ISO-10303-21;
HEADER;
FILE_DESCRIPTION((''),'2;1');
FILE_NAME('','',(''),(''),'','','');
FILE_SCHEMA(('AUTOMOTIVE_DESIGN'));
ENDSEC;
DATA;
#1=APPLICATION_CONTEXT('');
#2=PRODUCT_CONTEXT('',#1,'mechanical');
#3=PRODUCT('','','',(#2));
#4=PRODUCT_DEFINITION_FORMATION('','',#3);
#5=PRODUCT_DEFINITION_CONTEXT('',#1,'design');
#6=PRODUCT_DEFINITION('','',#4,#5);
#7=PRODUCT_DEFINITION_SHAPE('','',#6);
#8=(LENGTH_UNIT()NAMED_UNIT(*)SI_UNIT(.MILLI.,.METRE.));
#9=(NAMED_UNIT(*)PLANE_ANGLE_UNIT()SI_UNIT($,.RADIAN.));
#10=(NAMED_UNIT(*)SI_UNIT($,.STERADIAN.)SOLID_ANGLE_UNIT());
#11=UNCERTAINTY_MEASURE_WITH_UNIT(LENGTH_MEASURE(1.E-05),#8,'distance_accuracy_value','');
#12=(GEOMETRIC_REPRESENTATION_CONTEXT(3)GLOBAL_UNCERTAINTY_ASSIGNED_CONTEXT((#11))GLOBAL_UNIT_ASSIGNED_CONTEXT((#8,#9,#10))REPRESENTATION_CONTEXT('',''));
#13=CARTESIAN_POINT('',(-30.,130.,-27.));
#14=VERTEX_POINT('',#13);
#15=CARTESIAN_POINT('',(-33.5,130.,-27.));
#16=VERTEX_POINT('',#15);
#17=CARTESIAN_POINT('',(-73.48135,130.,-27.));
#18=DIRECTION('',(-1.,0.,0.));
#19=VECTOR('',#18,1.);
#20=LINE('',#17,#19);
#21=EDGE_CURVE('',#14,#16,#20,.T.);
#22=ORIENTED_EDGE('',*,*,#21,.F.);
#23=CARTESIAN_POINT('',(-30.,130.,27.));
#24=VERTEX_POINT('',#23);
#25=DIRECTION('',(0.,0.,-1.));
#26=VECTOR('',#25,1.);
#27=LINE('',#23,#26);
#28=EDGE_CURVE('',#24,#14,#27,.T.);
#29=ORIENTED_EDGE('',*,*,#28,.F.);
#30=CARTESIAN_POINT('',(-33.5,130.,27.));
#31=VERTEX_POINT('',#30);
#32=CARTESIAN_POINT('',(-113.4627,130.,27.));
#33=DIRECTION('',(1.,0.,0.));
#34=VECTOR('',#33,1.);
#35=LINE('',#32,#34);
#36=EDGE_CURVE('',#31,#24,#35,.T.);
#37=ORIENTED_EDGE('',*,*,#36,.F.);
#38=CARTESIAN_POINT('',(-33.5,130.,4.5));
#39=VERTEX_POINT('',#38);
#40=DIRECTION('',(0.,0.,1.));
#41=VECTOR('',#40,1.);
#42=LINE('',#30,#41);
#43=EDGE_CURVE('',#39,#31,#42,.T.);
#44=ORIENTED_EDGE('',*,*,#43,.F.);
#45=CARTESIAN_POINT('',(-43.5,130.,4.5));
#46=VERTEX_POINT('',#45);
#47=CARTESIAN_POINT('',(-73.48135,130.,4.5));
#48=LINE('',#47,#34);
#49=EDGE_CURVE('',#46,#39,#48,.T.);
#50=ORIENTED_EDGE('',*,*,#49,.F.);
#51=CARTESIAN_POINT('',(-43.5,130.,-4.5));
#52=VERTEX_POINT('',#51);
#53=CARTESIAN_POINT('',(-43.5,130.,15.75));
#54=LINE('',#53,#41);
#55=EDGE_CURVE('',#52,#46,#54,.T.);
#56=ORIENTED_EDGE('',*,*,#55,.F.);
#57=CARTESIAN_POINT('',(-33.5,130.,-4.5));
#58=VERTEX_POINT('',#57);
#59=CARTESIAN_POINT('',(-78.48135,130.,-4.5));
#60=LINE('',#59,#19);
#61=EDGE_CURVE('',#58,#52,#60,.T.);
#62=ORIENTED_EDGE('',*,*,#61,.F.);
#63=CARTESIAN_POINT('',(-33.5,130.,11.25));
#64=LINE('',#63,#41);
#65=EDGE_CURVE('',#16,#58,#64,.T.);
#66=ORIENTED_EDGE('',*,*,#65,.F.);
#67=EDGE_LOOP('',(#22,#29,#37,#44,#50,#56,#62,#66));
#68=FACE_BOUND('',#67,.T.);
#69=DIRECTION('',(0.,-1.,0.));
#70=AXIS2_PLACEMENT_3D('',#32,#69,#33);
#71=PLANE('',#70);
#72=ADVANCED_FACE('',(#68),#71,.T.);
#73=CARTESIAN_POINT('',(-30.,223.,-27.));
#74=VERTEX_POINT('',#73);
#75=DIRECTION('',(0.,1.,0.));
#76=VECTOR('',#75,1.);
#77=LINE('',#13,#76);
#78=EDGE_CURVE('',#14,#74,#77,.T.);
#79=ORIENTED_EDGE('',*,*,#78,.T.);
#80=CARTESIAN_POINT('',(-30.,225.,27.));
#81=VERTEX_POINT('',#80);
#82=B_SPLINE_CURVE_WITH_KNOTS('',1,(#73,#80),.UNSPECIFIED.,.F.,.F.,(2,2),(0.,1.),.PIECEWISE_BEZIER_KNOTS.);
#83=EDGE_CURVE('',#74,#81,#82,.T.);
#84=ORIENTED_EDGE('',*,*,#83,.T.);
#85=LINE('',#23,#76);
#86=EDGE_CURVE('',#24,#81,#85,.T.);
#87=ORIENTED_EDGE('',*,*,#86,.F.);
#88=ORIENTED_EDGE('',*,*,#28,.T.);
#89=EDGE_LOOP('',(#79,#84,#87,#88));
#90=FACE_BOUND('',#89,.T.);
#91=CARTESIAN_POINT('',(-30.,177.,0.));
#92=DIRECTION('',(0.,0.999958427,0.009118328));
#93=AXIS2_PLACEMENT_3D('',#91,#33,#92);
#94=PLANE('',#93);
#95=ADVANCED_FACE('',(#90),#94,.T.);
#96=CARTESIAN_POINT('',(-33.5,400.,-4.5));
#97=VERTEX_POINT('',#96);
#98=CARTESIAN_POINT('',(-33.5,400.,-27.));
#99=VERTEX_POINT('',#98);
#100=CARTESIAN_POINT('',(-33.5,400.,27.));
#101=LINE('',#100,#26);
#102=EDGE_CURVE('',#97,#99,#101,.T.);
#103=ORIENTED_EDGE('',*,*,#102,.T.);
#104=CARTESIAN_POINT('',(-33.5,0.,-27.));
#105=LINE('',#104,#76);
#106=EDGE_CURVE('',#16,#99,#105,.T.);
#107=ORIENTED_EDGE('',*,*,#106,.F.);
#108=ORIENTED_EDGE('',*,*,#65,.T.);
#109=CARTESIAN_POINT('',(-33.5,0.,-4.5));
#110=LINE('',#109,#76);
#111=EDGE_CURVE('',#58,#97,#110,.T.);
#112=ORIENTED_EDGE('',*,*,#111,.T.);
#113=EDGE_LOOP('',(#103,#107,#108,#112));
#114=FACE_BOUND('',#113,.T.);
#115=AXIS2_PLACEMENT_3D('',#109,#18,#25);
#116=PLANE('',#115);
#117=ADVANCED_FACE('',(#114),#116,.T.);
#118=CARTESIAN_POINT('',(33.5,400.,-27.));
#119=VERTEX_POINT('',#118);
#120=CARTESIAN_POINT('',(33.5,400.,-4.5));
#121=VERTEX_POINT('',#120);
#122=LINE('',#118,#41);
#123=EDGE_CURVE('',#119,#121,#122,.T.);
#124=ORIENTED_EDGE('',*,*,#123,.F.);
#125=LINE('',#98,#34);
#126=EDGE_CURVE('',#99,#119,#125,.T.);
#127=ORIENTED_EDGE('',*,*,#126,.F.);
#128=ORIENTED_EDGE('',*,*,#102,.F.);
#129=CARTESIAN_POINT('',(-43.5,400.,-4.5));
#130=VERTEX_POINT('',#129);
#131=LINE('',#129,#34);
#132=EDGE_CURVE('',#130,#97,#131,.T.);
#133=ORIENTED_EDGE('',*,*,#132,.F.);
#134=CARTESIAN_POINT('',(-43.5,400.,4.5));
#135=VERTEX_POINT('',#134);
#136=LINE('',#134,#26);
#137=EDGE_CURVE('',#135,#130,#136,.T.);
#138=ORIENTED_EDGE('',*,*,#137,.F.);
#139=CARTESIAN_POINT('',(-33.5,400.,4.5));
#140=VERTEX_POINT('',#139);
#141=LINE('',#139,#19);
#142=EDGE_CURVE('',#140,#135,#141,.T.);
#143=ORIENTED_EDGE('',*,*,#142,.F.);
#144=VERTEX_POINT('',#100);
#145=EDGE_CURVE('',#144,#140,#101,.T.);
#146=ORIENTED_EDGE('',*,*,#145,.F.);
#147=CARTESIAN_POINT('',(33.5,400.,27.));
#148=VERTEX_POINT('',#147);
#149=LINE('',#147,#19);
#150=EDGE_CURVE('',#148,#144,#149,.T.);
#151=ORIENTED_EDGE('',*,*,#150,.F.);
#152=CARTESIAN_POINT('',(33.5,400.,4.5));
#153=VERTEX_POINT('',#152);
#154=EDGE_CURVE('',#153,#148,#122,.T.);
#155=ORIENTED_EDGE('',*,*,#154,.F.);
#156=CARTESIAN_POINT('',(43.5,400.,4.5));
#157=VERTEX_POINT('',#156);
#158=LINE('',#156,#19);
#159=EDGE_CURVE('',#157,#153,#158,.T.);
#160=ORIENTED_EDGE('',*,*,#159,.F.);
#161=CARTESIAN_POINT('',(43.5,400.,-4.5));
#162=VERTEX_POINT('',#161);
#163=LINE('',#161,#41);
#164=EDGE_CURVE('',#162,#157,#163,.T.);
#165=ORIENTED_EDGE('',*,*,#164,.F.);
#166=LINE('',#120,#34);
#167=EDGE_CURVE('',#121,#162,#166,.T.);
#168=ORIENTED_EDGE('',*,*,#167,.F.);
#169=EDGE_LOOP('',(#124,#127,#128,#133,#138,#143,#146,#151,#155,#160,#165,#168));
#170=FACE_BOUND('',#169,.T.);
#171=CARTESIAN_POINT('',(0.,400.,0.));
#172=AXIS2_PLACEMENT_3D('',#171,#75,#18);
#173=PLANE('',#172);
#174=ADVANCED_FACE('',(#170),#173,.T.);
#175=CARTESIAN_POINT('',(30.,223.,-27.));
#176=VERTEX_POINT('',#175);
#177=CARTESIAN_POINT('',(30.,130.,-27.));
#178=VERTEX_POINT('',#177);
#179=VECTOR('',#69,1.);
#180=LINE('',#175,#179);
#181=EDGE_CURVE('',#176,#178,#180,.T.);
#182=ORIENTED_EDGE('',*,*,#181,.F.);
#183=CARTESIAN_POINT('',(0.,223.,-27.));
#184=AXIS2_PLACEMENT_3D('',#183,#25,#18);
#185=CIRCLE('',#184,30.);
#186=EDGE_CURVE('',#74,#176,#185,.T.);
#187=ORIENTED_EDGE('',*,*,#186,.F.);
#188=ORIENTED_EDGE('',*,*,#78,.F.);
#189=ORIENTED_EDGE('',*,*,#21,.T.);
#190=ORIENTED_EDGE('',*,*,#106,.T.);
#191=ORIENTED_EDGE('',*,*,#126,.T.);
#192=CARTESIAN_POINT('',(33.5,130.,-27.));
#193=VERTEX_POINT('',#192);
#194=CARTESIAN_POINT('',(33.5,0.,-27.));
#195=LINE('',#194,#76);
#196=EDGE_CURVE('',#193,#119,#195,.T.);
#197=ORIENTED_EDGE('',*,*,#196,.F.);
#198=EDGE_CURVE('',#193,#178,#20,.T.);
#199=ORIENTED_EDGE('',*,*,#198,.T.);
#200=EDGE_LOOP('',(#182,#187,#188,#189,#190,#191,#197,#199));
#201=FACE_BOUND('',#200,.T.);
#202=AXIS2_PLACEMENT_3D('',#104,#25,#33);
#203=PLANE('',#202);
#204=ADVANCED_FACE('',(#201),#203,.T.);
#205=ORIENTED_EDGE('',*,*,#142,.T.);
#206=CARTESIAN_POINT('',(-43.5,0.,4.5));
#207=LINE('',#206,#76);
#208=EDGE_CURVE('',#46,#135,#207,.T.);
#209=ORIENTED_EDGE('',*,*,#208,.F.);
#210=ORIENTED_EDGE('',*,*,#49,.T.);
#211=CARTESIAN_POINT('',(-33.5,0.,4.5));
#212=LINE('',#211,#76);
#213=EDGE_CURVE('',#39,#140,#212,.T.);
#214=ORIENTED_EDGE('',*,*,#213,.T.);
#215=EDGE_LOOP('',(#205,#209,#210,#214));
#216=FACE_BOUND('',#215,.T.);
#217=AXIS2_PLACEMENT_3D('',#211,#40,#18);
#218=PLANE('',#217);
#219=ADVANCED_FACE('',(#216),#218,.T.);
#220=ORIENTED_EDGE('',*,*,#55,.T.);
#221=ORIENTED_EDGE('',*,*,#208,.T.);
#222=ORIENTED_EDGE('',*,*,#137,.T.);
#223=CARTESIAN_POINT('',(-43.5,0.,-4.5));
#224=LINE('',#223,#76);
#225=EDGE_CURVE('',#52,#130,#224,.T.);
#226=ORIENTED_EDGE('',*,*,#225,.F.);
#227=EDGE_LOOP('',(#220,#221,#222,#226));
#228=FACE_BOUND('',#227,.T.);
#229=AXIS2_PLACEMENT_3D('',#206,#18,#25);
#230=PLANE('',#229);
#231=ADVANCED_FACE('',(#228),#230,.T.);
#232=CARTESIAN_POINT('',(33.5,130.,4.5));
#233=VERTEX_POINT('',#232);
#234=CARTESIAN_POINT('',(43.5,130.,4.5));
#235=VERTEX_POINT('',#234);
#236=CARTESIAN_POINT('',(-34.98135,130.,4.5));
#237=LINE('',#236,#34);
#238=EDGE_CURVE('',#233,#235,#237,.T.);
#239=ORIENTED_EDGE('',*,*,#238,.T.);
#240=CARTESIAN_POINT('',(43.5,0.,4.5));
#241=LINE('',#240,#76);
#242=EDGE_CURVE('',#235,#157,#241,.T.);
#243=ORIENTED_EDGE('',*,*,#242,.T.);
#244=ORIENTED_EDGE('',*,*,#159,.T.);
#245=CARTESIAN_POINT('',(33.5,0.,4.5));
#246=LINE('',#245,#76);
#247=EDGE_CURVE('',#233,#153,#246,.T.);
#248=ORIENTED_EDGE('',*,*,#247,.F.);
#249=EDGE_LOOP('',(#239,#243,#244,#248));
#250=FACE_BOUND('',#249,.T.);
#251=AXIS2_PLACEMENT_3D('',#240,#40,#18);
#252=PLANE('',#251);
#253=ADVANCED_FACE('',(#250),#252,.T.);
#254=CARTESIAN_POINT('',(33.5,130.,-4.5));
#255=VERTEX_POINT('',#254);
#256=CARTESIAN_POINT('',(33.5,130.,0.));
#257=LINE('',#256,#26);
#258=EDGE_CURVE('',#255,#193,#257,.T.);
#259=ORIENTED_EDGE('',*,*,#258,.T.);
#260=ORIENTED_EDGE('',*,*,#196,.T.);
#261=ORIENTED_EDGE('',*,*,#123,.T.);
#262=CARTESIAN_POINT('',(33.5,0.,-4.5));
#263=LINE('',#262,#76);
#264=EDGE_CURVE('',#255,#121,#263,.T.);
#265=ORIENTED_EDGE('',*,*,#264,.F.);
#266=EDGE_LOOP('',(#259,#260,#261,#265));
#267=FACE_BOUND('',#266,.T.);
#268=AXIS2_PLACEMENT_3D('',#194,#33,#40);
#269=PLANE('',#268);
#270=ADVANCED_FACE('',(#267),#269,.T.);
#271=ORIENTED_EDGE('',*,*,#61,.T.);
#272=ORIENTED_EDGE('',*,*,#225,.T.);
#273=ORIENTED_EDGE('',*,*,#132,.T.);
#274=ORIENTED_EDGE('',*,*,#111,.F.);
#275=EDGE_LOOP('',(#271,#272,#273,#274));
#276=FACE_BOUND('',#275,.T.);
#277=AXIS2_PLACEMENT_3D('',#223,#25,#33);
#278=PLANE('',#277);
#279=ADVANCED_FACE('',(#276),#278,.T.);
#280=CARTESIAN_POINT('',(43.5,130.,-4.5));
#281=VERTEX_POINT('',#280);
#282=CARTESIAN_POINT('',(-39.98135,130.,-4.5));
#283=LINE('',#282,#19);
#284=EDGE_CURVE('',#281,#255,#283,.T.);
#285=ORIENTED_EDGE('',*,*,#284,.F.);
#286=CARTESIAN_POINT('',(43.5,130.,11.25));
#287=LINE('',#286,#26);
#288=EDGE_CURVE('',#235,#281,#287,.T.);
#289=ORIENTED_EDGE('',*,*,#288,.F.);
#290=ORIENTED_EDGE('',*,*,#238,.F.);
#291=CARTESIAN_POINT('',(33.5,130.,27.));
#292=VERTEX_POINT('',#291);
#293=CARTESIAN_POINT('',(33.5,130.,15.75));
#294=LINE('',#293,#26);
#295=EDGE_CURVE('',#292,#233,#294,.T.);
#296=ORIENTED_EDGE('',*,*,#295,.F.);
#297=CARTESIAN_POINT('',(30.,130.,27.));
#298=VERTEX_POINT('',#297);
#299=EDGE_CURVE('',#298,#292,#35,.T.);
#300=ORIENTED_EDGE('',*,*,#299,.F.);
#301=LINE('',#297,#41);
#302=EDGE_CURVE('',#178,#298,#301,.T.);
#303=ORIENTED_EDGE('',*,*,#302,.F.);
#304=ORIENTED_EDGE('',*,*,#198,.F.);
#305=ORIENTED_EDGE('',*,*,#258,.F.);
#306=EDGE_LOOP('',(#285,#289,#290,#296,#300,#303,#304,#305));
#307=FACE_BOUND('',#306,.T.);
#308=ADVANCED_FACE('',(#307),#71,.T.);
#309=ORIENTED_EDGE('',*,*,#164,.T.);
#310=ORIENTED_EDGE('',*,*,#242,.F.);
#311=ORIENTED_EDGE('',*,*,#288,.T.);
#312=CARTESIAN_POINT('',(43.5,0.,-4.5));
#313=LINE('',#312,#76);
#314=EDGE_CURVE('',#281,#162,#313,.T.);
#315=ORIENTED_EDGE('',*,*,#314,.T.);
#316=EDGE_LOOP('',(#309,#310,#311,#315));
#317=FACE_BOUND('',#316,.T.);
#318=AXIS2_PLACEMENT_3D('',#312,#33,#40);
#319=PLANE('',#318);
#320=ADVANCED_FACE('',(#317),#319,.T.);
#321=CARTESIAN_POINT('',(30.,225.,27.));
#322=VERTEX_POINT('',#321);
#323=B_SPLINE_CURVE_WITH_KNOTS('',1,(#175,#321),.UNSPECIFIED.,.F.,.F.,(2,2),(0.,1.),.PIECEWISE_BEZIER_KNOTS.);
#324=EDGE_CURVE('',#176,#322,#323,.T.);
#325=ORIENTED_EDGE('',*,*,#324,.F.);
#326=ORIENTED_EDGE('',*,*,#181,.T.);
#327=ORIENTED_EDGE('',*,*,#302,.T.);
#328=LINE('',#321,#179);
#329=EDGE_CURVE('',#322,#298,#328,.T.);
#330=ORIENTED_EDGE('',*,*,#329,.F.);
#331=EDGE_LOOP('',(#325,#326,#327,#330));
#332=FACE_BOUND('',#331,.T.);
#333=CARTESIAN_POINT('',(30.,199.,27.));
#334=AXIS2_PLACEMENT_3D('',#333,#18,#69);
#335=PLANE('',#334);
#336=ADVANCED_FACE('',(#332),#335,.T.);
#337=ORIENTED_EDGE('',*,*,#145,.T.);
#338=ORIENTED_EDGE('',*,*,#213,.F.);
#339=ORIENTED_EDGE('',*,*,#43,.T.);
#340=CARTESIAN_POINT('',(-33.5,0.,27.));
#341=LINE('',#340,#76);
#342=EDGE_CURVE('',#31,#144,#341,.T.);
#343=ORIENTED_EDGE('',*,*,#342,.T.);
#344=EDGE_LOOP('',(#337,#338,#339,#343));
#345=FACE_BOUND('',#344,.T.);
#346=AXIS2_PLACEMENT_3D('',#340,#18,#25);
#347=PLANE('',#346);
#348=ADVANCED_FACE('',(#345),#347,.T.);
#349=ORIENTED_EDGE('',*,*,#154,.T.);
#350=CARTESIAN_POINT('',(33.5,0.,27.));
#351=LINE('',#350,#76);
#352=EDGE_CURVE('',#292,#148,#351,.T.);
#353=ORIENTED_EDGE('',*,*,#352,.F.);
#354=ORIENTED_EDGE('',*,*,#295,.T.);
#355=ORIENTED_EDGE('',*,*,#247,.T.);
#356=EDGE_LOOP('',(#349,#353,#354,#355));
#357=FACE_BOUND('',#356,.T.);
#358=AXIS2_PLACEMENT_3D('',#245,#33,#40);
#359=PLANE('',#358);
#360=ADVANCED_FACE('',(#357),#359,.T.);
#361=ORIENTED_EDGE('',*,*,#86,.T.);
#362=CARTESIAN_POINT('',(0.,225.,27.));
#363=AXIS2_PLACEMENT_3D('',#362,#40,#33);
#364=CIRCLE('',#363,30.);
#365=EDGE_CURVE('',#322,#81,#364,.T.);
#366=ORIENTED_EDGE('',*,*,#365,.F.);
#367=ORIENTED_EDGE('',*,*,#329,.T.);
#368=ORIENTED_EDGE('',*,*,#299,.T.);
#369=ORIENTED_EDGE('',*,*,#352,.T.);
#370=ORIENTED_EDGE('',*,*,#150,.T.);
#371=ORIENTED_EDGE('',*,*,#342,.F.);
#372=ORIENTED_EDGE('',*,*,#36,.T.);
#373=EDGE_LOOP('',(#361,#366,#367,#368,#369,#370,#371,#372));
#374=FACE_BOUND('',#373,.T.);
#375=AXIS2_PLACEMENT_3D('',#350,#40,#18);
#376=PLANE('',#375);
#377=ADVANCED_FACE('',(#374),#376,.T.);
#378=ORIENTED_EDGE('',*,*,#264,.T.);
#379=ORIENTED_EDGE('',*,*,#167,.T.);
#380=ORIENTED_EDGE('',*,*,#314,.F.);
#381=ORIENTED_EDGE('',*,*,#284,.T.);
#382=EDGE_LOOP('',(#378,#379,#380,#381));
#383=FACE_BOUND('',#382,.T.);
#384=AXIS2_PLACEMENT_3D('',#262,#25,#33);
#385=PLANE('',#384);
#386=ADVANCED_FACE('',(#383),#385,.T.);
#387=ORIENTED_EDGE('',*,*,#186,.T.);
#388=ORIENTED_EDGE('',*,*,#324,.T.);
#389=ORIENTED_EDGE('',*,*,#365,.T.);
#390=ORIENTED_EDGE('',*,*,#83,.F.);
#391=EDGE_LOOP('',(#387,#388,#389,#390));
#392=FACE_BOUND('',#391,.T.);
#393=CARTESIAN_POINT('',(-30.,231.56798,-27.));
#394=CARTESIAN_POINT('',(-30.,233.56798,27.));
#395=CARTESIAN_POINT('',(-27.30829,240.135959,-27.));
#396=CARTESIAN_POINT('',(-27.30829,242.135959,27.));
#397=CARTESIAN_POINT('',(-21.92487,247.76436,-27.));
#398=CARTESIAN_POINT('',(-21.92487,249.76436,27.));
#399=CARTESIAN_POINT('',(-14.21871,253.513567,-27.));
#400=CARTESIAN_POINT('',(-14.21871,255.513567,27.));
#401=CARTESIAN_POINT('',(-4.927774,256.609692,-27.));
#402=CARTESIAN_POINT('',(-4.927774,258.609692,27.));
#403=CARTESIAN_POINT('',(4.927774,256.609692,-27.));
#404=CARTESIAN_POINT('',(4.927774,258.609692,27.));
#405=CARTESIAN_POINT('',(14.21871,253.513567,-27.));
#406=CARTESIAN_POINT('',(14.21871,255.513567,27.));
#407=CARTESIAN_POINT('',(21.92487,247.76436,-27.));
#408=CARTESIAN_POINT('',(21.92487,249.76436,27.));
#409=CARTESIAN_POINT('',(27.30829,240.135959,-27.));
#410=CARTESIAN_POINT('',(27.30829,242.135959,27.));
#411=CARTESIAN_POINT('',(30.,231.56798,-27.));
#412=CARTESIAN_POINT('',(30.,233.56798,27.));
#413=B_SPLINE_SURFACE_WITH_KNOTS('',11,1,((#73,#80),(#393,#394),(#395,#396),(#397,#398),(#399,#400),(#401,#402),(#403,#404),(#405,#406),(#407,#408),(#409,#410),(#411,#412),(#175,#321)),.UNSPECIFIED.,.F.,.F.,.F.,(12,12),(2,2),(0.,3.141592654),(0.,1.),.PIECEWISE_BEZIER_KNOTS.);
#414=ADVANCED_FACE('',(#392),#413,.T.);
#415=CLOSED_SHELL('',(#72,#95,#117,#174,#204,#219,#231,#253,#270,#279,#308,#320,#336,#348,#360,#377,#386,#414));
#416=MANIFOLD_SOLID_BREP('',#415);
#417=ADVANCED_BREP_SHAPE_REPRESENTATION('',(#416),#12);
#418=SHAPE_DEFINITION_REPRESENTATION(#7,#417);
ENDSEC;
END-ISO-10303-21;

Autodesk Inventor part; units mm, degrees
ref_plane "YZ Plane" through (0, 0, 0) normal (1, 0, 0) x (0, 1, 0)
ref_plane "XZ Plane" through (0, 0, 0) normal (0, 1, 0) x (-1, 0, 0)
ref_plane "XY Plane" through (0, 0, 0) normal (0, 0, 1) x (1, 0, 0)
sketch "草圖1" plane through (0, 0, 0) normal (0, 1, 0) x (-1, 0, 0)
  line L0 (-33.5, 27) -> (33.5, 27)
  line L1 (33.5, 27) -> (33.5, -27)
  line L2 (33.5, -27) -> (-33.5, -27)
  line L3 (-33.5, -27) -> (-33.5, 27)
  line L4 (-33.5, 27) -> (33.5, -27) construction
  line L5 (33.5, 27) -> (-33.5, -27) construction
  line L6 (43.5, -4.5) -> (33.5, -4.5)
  line L7 (33.5, -4.5) -> (33.5, 4.5)
  line L8 (33.5, 4.5) -> (43.5, 4.5)
  line L9 (43.5, 4.5) -> (43.5, -4.5)
  line L10 (-33.5, -4.5) -> (-43.5, -4.5)
  line L11 (-43.5, -4.5) -> (-43.5, 4.5)
  line L12 (-43.5, 4.5) -> (-33.5, 4.5)
  line L13 (-33.5, 4.5) -> (-33.5, -4.5)
  point P0 (0, 0)
  point P1 (33.5, 0)
  point P2 (-33.5, 0)
  point P3 (-33.5, 4.5)
  point P4 (-33.5, -4.5)
  dimension "d0" = 67
  dimension "d1" = 54
  dimension "d2" = 9
  dimension "d3" = 10
extrude "擠出1" add sketch "草圖1" along normal blind 400
sketch "草圖2" plane through (-33.5, 0, 27) normal (0, 0, 1) x (1, 0, 0)
  line L0 (0, 0) -> (0, 400) projected
  line L1 (0, 400) -> (67, 400) projected
  line L2 (67, 400) -> (67, 0) projected
  line L3 (67, 0) -> (0, 0) projected
  circle A0 centre (33.5, 199) radius 30
  line L4 (3.5, 199) -> (63.5, 199)
  line L5 (63.5, 199) -> (63.5, -2.327)
  line L6 (63.5, -2.327) -> (3.5, -2.327)
  line L7 (3.5, -2.327) -> (3.5, 199)
  point P0 (33.5, 0)
  point P1 (33.5, 0)
  point P2 (3.5, 199)
  point P3 (3.5, 0)
  point P4 (63.5, 0)
  dimension "d6" = 199
  dimension "d7" = 60
extrude "擠出2" cut sketch "草圖2" against normal through all contours L7 A0 L5 L3 | L4 A0 | A0 L4
sketch "草圖3" plane through (-33.5, 400, 27) normal (0, 0, 1) x (1, 0, 0)
  line L0 (-79.9627, -270) -> (146.9627, -270)
  line L1 (146.9627, -270) -> (146.9627, -400)
  line L2 (146.9627, -400) -> (-79.9627, -400)
  line L3 (-79.9627, -400) -> (-79.9627, -270)
  point P0 (33.5, -400)
  point P1 (33.5, -400)
  dimension "d10" = 130
extrude "擠出3" cut sketch "草圖3" against normal through all
sketch "草圖4" plane through (33.5, 400, -27) normal (0, 0, -1) x (-1, 0, 0)
  arc A0 (63.5, -201) -> (3.5, -201) centre (33.5, -201) ccw construction
  circle A1 centre (33.5, -177) radius 30
  line L0 (63.5, -270) -> (3.5, -270)
  line L1 (3.5, -270) -> (3.5, -177)
  line L2 (3.5, -177) -> (63.5, -177)
  line L3 (63.5, -177) -> (63.5, -270)
  point P0 (33.5, -400)
  point P1 (63.5, -270)
  dimension "d13" = 24
  dimension "d14" = 60
sketch "草圖5" plane through (-33.5, 400, 27) normal (0, 0, 1) x (1, 0, 0)
  circle A0 centre (33.5, -175) radius 30
  arc A1 (63.5, -201) -> (3.5, -201) centre (33.5, -201) ccw projected
  line L0 (63.5, -270) -> (3.5, -270)
  line L1 (3.5, -270) -> (3.5, -175)
  line L2 (3.5, -175) -> (63.5, -175)
  line L3 (63.5, -175) -> (63.5, -270)
  point P0 (33.5, -400)
  point P1 (63.5, -270)
  dimension "d15" = 26
  dimension "d16" = 60
loft "斷面混成1" cut profiles "草圖4", "草圖5"
properties part number "Slider-7"
